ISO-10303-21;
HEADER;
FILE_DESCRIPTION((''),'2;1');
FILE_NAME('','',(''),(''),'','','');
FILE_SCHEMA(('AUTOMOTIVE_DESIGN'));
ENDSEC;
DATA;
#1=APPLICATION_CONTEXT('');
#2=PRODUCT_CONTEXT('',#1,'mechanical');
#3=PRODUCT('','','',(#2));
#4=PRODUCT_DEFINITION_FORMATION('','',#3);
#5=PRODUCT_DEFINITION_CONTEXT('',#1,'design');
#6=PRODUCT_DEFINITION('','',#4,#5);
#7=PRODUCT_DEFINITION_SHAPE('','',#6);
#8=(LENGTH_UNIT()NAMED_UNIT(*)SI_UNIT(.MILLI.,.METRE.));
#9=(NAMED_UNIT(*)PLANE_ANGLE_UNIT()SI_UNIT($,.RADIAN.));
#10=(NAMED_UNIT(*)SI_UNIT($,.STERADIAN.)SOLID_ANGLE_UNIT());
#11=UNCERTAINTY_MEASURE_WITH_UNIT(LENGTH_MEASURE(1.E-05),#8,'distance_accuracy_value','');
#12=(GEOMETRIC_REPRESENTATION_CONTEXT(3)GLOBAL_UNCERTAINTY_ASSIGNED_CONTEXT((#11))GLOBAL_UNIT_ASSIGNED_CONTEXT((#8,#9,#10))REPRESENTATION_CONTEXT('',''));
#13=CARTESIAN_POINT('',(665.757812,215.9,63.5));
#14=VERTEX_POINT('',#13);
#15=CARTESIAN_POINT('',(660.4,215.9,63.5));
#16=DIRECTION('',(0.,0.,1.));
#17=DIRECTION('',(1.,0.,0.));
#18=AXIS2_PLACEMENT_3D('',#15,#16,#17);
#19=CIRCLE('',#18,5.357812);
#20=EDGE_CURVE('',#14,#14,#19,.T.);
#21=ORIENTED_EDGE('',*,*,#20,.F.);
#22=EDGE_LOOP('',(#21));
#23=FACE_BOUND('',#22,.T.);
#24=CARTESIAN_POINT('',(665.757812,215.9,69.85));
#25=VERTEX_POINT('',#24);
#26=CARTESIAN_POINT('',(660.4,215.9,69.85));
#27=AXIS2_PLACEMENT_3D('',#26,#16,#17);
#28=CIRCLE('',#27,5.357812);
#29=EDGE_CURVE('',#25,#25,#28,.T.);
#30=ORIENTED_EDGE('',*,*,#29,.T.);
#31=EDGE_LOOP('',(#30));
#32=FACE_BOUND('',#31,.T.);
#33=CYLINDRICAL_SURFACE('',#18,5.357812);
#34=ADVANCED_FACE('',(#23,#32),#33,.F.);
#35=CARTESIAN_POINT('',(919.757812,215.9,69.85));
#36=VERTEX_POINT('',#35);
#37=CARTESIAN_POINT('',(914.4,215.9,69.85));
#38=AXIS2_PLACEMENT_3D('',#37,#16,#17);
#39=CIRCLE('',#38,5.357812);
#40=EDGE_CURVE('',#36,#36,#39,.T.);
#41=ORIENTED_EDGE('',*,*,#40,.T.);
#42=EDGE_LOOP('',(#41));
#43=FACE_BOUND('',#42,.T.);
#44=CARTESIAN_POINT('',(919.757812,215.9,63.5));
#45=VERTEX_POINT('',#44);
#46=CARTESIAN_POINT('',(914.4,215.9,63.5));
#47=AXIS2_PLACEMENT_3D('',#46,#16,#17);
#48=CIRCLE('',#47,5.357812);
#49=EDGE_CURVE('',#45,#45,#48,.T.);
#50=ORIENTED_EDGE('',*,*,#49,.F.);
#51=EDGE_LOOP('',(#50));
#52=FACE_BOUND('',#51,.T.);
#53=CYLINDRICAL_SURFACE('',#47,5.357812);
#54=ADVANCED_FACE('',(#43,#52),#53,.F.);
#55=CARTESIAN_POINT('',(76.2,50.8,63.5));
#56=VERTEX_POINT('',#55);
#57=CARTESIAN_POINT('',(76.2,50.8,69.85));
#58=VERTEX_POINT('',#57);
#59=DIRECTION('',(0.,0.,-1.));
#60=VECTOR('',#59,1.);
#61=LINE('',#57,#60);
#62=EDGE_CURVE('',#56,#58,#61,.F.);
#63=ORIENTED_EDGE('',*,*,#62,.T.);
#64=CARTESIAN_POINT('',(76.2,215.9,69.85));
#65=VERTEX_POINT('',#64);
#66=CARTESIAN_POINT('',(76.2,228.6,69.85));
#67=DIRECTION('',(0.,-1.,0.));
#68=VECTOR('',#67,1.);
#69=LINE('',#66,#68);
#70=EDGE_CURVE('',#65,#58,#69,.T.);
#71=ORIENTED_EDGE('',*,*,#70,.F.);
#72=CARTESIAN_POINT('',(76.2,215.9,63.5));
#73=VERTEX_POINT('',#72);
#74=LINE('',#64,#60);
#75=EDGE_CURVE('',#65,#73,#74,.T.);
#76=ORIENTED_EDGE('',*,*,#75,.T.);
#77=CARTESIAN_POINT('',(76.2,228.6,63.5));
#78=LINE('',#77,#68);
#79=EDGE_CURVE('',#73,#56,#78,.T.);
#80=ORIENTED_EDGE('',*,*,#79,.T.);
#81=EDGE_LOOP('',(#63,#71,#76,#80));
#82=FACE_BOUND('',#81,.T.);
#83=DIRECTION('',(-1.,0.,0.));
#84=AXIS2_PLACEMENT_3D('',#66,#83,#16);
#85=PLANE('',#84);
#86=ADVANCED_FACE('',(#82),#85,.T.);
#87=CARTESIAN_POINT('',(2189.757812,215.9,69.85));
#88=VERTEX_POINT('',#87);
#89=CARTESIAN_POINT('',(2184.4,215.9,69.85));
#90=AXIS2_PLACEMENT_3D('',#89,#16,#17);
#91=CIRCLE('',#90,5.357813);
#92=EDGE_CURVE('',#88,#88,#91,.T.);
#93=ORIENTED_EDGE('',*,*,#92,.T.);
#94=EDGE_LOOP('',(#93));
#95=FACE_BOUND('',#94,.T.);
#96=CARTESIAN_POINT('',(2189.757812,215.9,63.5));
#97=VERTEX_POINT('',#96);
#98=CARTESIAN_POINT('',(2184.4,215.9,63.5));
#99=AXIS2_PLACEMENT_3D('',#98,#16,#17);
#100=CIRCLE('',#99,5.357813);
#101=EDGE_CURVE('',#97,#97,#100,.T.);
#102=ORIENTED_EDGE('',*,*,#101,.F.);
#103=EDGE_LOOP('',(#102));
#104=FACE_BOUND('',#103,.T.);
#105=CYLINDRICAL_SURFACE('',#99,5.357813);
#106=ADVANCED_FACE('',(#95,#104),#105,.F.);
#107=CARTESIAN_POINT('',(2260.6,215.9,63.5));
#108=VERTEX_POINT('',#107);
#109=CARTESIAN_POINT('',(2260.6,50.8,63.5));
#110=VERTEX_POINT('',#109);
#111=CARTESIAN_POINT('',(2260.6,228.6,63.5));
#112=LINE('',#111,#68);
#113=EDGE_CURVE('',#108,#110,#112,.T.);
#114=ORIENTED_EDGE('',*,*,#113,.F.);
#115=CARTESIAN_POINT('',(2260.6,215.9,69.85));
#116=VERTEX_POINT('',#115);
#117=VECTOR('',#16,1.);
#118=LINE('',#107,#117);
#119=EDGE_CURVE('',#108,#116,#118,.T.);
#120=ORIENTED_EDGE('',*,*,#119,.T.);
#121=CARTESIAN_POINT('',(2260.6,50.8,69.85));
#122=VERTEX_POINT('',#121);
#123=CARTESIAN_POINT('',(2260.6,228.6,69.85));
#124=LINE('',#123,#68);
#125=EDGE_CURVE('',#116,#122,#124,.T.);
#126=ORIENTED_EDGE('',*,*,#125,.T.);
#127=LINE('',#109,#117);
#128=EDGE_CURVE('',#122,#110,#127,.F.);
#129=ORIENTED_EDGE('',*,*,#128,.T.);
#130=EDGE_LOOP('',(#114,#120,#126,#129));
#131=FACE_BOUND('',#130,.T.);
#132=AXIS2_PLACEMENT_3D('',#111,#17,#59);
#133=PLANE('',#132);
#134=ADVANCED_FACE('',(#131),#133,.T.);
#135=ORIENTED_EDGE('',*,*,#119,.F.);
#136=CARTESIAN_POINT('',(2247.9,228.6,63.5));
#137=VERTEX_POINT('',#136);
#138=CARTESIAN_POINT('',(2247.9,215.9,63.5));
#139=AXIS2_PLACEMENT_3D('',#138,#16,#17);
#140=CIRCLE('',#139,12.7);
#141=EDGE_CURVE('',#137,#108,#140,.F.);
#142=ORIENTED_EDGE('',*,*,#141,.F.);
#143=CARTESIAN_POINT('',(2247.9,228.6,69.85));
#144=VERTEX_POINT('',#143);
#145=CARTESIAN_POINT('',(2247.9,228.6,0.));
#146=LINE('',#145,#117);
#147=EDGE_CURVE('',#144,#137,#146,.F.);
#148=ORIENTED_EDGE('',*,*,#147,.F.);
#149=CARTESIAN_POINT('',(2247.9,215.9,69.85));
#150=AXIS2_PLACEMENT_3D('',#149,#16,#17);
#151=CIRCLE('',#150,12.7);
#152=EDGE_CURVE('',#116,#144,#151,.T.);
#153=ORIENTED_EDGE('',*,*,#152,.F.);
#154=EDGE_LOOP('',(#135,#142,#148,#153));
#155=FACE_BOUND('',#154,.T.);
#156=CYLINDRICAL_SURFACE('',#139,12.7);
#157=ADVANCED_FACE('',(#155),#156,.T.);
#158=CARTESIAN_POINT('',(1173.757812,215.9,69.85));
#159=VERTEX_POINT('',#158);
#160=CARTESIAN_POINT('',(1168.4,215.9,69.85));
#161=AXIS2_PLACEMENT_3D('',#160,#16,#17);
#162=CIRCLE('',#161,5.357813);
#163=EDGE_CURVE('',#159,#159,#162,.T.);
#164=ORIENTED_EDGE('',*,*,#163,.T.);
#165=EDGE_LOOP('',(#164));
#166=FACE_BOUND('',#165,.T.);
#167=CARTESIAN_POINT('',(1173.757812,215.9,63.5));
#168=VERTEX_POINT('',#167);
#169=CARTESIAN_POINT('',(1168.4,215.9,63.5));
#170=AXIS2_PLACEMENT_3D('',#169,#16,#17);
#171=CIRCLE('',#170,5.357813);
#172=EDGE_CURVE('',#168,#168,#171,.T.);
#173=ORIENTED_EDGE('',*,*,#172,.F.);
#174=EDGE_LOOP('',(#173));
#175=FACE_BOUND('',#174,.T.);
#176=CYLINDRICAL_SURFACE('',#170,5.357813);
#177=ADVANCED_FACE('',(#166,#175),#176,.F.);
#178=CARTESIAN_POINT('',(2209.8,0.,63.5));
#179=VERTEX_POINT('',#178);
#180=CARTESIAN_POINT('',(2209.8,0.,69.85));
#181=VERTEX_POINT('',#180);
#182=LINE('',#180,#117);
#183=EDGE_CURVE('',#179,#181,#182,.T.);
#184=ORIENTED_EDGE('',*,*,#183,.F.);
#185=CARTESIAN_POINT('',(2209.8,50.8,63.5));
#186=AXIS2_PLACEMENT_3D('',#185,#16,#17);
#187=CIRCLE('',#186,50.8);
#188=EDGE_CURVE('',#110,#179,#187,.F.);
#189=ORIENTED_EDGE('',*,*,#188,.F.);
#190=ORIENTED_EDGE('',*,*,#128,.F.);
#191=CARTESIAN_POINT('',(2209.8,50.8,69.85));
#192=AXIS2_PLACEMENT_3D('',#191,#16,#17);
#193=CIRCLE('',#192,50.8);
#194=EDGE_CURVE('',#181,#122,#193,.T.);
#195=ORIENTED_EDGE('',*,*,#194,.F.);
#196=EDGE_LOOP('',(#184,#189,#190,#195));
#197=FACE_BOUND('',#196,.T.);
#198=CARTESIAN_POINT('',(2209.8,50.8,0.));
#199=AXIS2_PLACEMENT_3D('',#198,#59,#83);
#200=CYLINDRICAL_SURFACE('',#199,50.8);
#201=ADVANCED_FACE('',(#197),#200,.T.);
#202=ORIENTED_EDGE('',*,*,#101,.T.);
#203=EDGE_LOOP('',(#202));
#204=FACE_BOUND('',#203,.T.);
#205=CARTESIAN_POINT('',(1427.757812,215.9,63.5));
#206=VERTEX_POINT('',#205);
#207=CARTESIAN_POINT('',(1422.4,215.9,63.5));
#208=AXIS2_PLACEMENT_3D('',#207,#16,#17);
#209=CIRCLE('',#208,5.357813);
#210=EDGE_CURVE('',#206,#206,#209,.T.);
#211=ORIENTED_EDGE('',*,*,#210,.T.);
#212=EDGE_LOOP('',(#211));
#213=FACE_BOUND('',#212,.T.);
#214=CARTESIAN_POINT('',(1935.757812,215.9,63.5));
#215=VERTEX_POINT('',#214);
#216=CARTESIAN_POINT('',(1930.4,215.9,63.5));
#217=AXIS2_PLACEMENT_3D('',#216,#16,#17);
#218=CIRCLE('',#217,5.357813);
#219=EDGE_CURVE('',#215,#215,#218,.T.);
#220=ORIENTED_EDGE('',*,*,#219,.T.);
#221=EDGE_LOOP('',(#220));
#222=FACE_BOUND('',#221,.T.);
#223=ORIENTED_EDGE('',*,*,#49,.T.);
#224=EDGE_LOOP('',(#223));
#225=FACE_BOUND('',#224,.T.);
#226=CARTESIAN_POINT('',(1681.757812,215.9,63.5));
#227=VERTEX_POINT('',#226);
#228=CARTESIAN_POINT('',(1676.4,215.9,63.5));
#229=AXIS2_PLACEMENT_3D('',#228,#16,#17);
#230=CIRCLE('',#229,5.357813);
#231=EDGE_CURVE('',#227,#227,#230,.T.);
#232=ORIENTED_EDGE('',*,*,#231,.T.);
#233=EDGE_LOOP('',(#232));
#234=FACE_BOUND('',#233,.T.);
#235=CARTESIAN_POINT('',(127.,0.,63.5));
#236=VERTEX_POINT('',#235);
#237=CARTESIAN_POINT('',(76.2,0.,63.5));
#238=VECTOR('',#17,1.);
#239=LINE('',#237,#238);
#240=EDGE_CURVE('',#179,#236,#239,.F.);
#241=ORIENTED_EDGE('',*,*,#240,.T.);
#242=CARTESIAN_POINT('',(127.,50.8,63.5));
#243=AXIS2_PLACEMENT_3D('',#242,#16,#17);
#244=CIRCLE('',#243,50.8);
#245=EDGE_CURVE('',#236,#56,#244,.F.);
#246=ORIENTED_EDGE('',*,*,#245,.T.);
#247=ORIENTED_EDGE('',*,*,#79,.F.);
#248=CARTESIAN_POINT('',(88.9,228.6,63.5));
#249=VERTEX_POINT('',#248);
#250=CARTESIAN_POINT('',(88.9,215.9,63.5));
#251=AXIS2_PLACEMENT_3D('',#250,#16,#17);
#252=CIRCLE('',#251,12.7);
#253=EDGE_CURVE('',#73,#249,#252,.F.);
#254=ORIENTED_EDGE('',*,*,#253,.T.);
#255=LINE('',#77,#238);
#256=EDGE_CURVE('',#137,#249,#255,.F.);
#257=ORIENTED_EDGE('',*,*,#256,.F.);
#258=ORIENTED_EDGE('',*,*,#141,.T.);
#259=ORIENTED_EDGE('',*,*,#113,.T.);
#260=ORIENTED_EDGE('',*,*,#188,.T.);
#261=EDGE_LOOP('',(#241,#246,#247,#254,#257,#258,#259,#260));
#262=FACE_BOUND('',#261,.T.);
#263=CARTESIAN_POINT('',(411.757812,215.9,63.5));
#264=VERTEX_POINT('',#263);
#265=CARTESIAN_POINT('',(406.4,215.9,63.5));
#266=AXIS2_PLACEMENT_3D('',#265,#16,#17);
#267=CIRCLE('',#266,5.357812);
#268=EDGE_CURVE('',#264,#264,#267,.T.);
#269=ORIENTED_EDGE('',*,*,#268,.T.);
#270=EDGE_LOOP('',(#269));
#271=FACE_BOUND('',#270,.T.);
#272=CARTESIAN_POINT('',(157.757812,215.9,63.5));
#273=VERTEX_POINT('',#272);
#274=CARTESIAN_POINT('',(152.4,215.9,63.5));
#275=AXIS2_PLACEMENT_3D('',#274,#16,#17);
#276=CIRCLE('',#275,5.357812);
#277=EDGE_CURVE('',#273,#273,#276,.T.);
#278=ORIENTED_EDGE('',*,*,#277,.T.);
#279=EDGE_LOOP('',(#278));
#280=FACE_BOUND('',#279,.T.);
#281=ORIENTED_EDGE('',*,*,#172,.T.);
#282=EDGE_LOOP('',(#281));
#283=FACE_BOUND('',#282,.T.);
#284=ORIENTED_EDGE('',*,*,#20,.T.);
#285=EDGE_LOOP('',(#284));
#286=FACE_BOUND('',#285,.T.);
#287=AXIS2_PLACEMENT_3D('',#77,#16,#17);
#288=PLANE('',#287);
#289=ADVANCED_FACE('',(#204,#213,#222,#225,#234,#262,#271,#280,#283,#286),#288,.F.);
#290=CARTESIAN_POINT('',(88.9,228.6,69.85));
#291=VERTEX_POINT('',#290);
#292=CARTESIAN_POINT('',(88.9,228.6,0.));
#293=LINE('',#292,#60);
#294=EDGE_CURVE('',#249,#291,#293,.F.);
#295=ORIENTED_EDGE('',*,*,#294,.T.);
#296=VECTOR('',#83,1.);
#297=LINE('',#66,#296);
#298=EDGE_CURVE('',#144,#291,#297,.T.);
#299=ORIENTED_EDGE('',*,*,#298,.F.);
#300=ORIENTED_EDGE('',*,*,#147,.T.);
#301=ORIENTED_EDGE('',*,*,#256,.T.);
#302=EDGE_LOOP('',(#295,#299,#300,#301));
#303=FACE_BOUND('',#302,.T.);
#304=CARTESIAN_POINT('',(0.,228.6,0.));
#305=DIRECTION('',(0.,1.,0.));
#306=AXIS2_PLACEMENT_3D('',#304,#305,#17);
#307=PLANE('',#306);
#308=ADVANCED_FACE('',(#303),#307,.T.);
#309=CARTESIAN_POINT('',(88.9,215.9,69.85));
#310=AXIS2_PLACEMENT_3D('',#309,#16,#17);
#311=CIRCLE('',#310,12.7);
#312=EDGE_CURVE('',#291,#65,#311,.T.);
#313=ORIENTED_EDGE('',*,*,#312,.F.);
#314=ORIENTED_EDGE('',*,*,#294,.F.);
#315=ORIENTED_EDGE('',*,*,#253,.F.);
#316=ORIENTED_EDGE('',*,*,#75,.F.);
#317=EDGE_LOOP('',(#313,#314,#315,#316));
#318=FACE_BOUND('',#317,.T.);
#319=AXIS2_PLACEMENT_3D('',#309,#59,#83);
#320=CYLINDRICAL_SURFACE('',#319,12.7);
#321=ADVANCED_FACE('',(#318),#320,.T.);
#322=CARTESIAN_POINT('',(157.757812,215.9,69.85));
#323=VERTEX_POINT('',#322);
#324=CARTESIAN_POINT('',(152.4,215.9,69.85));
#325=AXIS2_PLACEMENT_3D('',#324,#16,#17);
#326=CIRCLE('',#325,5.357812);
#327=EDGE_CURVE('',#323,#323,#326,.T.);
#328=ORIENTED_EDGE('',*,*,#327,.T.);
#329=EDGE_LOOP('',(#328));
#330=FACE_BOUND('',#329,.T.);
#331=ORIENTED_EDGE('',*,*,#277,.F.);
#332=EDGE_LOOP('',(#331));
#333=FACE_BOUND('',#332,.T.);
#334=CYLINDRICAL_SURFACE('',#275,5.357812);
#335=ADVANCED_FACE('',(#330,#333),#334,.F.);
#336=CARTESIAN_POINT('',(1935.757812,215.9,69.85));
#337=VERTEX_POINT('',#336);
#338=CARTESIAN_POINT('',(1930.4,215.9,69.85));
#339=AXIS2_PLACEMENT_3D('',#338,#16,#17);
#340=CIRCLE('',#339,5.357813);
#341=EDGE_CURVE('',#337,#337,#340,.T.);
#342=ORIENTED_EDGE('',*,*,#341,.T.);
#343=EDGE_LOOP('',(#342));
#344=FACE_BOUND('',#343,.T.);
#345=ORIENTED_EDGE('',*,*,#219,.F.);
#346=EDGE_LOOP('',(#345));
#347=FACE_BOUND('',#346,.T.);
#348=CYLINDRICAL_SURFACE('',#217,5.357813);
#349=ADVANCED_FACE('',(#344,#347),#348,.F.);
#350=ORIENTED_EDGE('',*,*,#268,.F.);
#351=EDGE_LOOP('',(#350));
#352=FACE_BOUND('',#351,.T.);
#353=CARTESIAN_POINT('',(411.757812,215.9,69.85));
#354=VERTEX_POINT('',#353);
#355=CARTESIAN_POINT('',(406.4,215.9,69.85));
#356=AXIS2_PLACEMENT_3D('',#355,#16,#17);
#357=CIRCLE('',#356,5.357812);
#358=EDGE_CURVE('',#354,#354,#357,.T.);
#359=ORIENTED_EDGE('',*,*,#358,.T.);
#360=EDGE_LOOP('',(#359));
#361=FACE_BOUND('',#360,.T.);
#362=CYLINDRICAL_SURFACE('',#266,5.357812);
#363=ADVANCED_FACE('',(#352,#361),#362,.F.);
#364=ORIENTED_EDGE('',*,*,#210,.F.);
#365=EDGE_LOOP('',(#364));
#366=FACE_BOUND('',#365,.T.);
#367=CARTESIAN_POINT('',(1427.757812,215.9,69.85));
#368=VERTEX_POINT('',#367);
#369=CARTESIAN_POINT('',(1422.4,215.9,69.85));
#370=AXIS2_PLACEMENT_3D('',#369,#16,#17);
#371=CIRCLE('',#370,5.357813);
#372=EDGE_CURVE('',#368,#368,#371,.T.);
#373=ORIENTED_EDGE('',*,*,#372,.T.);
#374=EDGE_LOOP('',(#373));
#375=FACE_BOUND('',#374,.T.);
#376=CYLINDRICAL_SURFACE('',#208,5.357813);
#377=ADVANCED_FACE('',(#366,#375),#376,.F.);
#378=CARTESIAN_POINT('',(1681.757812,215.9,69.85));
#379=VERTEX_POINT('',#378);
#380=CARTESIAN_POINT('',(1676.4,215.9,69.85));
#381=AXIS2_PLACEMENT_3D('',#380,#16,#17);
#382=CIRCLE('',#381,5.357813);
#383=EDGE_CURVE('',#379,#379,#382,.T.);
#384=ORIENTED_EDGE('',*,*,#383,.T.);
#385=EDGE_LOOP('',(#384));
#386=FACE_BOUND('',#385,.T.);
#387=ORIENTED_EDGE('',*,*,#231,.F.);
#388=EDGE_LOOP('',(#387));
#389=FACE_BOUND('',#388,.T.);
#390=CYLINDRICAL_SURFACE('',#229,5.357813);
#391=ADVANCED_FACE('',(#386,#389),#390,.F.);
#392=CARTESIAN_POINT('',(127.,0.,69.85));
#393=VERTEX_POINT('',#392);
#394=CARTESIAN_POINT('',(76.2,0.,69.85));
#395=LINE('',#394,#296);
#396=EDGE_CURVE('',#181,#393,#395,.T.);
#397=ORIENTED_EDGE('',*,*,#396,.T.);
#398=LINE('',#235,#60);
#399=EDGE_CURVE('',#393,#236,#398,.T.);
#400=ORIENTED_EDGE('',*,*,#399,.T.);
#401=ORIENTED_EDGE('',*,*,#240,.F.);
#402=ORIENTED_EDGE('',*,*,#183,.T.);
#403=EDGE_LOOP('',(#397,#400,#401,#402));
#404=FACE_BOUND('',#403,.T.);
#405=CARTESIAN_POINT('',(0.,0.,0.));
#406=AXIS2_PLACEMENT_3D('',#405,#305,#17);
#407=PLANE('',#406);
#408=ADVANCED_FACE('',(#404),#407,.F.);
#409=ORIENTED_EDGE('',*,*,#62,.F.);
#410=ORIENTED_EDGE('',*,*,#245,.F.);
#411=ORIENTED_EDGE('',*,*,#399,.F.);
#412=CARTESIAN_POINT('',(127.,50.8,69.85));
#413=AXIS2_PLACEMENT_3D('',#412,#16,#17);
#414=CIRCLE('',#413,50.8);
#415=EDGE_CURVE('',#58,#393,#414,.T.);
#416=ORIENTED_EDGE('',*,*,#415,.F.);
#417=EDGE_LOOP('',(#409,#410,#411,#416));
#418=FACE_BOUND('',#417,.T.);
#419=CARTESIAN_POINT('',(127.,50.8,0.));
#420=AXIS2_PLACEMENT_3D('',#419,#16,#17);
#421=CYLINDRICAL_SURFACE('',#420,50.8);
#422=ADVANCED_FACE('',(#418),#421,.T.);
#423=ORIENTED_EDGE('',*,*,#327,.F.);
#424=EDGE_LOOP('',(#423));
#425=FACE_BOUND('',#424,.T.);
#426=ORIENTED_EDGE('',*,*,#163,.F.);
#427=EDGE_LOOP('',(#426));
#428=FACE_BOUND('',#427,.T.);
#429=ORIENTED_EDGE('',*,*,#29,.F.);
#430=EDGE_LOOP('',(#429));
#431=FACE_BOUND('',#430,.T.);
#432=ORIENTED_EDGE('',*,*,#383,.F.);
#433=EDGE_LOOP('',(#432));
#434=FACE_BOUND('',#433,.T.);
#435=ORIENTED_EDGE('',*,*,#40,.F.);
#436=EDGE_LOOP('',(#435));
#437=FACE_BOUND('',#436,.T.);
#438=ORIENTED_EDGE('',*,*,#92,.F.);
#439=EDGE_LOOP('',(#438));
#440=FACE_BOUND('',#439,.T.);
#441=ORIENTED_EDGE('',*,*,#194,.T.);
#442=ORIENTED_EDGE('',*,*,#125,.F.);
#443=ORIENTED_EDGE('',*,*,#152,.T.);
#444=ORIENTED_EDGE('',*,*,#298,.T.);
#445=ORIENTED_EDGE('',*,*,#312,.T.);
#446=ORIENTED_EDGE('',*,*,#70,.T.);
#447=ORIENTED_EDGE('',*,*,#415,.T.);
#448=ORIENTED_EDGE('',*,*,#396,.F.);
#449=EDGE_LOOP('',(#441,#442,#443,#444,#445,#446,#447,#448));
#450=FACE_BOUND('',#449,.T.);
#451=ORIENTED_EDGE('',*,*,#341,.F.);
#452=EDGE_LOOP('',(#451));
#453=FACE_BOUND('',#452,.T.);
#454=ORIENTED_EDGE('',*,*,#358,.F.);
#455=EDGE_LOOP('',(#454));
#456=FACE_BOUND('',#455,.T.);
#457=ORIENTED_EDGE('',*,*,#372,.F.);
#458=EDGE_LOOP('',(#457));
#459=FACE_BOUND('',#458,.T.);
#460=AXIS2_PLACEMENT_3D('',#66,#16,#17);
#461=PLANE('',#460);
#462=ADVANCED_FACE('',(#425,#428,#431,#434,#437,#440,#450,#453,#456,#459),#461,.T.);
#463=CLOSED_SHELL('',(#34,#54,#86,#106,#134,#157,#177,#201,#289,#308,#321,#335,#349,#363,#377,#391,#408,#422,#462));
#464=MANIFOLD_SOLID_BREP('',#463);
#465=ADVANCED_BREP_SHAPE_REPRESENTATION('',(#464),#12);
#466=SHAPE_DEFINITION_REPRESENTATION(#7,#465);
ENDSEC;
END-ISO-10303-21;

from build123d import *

# Parameters (mm, degrees)
SKETCH1_W          = 2184.4
SKETCH1_H          = 6.35
BASE_FLANGE1_DEPTH = 228.6
SKETCH2_R          = 5.3578125
CUT_EXTRUDE1_DEPTH = 6.35
FILLET1_R          = 50.8
FILLET2_R          = 12.7


# Sheet-metal steps are written as plain solids
with BuildPart() as part:
    # Sketch1 → Base-Flange1 (new body)
    with BuildSketch(Plane(origin=(0, 0, 0), x_dir=(1, 0, 0), z_dir=(0, 1, 0))):
        with Locations((1168.4, -66.675)):
            Rectangle(SKETCH1_W, SKETCH1_H)
    extrude(amount=BASE_FLANGE1_DEPTH)

    # Sketch2 → Cut-Extrude1 (cut)
    with BuildSketch(Plane.XY.offset(69.85)):
        with Locations((152.4, 215.9)):
            Circle(SKETCH2_R)
        with Locations((406.4, 215.9)):
            Circle(SKETCH2_R)
        with Locations((660.4, 215.9)):
            Circle(SKETCH2_R)
        with Locations((914.4, 215.9)):
            Circle(SKETCH2_R)
        with Locations((1168.4, 215.9)):
            Circle(SKETCH2_R)
        with Locations((1422.4, 215.9)):
            Circle(SKETCH2_R)
        with Locations((1676.4, 215.9)):
            Circle(SKETCH2_R)
        with Locations((1930.4, 215.9)):
            Circle(SKETCH2_R)
        with Locations((2184.4, 215.9)):
            Circle(SKETCH2_R)
    extrude(amount=-CUT_EXTRUDE1_DEPTH, mode=Mode.SUBTRACT)

    # Fillet1
    fillet1_edges = [part.edges().sort_by_distance(p)[0] for p in [
        (2260.6, 0, 66.675),
        (76.2, 0, 66.675),
    ]]
    fillet(fillet1_edges, radius=FILLET1_R)

    # Fillet2
    fillet2_edges = [part.edges().sort_by_distance(p)[0] for p in [
        (2260.6, 228.6, 66.675),
        (76.2, 228.6, 66.675),
    ]]
    fillet(fillet2_edges, radius=FILLET2_R)


solid = part.part
